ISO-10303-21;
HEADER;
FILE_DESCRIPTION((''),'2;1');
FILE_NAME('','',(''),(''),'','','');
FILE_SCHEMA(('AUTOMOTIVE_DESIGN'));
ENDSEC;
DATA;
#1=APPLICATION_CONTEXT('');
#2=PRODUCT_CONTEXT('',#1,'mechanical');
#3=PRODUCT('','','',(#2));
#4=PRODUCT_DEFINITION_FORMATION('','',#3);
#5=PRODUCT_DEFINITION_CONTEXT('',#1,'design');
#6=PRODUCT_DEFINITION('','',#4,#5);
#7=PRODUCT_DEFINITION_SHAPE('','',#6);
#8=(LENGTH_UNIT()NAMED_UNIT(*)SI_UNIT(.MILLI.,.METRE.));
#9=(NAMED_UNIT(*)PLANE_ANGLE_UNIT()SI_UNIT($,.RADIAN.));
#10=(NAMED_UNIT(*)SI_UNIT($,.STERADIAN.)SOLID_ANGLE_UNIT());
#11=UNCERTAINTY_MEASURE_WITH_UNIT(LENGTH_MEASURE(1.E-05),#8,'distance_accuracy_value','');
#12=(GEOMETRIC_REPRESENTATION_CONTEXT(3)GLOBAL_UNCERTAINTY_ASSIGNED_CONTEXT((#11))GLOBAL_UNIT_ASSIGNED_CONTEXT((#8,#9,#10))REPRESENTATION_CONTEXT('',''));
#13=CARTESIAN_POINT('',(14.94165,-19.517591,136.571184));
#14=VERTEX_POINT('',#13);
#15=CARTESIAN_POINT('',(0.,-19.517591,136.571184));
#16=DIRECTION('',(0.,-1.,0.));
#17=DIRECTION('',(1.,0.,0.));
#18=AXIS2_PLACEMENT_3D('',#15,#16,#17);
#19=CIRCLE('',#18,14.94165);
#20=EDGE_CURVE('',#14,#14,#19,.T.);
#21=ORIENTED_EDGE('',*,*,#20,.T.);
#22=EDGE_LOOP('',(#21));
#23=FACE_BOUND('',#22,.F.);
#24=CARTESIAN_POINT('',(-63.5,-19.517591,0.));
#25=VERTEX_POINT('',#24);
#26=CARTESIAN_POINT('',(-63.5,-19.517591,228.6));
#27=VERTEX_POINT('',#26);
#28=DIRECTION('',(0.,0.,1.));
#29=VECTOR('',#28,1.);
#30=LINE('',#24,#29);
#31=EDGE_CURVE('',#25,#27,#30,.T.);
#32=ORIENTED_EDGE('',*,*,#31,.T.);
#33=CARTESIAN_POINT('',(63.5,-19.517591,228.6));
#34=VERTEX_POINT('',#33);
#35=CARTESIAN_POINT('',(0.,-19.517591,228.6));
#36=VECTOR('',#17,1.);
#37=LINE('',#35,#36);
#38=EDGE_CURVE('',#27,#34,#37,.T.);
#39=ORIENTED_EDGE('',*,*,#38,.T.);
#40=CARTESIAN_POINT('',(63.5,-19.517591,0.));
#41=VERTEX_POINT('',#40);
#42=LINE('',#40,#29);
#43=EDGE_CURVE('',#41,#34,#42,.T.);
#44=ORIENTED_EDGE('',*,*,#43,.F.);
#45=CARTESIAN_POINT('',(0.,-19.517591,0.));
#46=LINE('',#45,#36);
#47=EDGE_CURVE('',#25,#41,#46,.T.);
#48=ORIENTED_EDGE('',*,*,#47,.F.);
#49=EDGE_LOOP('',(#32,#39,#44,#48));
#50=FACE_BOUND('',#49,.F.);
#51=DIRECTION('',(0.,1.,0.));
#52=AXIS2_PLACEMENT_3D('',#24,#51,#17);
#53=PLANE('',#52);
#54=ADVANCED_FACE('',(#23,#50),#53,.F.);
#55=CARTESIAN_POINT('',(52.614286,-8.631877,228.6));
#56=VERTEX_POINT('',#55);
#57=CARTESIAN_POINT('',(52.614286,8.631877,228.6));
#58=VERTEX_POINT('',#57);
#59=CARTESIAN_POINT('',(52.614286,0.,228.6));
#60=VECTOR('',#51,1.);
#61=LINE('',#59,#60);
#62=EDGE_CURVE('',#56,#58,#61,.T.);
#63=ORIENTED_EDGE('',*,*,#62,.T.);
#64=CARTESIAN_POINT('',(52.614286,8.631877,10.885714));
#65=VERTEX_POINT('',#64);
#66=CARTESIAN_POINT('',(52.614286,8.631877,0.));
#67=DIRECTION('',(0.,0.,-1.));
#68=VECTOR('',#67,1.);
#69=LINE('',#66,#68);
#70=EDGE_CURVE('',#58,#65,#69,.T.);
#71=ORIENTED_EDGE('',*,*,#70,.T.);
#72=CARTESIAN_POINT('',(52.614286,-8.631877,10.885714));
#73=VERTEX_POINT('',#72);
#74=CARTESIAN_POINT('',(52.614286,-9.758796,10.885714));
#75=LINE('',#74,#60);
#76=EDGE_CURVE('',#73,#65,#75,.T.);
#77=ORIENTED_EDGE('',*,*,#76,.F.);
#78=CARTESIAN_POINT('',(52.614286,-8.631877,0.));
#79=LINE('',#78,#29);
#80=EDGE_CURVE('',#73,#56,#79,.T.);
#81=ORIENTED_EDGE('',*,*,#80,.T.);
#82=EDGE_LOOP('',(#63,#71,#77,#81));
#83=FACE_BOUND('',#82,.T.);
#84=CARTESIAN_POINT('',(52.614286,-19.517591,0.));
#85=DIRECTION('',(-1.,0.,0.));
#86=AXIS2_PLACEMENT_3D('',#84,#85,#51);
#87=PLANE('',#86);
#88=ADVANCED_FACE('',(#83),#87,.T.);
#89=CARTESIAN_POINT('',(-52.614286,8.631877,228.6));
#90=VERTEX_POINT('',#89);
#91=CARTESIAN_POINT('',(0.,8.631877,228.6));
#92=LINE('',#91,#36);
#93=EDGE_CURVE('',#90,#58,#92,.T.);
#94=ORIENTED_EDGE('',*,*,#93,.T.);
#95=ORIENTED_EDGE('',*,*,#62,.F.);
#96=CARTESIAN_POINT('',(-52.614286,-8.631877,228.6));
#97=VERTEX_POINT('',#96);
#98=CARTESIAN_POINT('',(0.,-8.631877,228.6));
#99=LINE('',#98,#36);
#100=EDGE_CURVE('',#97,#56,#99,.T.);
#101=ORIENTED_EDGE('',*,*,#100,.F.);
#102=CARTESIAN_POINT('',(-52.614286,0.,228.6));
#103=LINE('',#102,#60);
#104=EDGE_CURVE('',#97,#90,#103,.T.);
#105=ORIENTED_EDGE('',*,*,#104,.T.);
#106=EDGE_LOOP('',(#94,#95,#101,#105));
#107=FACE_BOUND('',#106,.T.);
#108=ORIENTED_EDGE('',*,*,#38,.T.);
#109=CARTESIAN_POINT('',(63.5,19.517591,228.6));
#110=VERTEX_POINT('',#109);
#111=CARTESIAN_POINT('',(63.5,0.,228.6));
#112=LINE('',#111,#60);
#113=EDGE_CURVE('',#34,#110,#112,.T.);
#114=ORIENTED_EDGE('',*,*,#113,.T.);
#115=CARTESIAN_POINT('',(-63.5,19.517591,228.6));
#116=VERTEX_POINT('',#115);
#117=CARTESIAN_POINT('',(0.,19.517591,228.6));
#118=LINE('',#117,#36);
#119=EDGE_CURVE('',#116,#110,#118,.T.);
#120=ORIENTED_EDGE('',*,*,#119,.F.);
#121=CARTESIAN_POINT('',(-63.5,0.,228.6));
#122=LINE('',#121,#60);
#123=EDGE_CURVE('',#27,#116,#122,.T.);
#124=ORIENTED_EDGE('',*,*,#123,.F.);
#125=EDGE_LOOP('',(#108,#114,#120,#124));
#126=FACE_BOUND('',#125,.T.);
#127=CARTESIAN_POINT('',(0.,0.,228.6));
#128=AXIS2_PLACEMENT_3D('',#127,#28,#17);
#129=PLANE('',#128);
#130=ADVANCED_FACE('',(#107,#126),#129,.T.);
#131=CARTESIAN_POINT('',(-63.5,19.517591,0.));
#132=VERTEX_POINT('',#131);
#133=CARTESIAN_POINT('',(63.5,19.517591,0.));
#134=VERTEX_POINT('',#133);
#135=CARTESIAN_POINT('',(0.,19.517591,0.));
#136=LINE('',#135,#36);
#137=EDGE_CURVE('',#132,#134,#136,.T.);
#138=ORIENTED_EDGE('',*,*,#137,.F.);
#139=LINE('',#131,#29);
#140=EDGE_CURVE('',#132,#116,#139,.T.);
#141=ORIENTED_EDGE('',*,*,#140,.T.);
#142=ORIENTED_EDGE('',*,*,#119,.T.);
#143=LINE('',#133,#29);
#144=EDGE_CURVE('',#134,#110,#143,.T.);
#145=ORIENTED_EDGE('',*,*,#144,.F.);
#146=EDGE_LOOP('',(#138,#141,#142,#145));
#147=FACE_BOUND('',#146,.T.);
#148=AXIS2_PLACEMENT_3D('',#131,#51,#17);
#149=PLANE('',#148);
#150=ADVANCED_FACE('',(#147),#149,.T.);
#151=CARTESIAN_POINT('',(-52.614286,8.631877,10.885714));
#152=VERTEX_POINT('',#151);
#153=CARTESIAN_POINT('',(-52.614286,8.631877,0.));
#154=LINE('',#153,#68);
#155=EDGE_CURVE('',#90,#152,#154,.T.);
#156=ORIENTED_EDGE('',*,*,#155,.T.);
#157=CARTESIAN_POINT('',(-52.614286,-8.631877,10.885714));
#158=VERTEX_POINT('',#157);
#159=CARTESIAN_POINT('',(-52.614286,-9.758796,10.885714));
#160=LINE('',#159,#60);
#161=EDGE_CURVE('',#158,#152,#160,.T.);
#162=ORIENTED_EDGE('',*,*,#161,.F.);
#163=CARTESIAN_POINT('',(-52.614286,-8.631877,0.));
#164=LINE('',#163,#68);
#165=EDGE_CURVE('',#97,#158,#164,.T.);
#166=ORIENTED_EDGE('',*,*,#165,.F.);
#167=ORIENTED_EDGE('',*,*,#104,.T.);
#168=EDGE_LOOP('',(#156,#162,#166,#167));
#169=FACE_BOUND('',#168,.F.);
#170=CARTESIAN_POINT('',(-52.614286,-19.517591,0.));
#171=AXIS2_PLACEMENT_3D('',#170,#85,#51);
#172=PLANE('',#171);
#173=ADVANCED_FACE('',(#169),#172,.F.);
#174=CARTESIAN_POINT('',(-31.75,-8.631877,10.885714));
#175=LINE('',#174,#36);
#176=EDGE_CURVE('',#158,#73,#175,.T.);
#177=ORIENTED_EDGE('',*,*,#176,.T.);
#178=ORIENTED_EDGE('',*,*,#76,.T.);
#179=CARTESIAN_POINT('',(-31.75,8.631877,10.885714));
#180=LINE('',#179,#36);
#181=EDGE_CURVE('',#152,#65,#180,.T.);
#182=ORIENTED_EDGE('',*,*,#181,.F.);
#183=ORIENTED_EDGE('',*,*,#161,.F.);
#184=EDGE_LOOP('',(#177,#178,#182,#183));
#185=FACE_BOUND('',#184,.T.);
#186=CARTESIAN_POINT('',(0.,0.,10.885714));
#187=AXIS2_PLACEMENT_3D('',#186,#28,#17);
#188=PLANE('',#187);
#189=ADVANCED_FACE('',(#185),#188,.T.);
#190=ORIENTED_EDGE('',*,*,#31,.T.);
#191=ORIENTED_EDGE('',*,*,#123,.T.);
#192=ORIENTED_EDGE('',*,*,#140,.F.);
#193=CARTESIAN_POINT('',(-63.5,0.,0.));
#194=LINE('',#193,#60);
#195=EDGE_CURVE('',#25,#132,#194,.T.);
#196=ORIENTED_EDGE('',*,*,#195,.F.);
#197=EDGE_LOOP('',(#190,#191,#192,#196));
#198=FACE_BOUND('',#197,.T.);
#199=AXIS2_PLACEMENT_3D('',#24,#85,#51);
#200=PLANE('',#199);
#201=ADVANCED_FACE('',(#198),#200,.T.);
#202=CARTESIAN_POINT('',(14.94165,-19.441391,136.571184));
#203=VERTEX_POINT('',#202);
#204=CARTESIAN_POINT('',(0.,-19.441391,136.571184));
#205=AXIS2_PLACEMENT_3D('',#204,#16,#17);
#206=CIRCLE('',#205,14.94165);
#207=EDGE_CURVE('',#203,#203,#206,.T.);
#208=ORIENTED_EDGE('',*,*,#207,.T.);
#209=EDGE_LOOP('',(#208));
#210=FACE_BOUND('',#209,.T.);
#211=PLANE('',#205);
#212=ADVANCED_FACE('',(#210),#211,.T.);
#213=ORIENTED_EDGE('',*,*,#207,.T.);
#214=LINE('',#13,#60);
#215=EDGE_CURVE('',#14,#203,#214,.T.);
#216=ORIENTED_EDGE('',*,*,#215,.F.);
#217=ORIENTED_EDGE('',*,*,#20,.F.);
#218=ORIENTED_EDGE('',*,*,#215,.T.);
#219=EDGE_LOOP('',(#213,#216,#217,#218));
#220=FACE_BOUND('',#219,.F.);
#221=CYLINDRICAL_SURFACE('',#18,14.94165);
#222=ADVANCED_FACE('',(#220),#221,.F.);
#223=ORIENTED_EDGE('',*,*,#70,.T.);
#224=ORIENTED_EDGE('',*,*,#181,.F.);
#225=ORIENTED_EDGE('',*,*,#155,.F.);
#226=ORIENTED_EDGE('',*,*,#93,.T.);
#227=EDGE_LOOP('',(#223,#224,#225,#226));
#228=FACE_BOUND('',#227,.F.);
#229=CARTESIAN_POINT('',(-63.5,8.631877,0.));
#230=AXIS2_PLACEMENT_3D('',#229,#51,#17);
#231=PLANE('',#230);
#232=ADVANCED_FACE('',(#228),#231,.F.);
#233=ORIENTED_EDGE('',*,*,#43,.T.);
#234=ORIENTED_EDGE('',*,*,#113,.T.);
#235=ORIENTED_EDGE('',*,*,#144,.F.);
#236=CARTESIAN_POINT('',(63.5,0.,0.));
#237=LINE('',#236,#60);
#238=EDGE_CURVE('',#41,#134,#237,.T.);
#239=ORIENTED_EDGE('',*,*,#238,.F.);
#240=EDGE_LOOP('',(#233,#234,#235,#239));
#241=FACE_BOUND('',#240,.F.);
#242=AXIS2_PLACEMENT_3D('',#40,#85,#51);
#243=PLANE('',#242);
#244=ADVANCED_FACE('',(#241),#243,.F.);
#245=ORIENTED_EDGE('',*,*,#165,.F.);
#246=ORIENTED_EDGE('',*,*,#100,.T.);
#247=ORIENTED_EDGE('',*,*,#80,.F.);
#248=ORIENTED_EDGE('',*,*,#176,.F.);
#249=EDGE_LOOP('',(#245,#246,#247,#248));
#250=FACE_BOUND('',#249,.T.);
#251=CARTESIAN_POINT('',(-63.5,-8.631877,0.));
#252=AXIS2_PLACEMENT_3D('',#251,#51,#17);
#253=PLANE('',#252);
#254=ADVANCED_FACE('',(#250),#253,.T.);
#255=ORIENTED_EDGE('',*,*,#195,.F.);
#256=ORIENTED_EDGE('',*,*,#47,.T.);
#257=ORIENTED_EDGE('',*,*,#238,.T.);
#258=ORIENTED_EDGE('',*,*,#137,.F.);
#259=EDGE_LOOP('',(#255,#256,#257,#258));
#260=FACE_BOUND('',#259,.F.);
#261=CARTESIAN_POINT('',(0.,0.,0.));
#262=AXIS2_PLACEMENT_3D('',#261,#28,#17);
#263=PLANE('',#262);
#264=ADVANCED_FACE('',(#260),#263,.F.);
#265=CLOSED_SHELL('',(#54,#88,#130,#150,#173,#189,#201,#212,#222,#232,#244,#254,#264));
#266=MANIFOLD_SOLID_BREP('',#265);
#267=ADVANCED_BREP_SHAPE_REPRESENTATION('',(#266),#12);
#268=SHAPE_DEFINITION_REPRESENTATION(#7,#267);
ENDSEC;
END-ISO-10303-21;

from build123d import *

# Parameters (mm, degrees)
F0_W     = 127
F0_H     = 39.0351824462
F1_DEPTH = 228.6
F2_T     = -10.8857142857
F3_R     = 14.9416499322
F4_DEPTH = 0.0762


# Not quite as in the source:
# - a length typed as a fraction of an inch, garbled in the dataset ("3 / 203.2 mm" for 3/8 in), is restored


with BuildPart() as f1:
    # F0 (on Top) → F1 (new body)
    with BuildSketch(Plane.XY):
        Rectangle(F0_W, F0_H)
    extrude(amount=F1_DEPTH)

    # F2
    f2_openings = [f1.faces().sort_by_distance(p)[0] for p in [
        (0, 0, 228.6),
    ]]
    offset(amount=F2_T, openings=f2_openings)

    # F3 (on face) → F4 (cut)
    with BuildSketch(Plane.XZ.offset(19.5175912231)):
        with Locations((0, 136.5711838007)):
            Circle(F3_R)
    extrude(amount=-F4_DEPTH, mode=Mode.SUBTRACT)


solid = f1.part
